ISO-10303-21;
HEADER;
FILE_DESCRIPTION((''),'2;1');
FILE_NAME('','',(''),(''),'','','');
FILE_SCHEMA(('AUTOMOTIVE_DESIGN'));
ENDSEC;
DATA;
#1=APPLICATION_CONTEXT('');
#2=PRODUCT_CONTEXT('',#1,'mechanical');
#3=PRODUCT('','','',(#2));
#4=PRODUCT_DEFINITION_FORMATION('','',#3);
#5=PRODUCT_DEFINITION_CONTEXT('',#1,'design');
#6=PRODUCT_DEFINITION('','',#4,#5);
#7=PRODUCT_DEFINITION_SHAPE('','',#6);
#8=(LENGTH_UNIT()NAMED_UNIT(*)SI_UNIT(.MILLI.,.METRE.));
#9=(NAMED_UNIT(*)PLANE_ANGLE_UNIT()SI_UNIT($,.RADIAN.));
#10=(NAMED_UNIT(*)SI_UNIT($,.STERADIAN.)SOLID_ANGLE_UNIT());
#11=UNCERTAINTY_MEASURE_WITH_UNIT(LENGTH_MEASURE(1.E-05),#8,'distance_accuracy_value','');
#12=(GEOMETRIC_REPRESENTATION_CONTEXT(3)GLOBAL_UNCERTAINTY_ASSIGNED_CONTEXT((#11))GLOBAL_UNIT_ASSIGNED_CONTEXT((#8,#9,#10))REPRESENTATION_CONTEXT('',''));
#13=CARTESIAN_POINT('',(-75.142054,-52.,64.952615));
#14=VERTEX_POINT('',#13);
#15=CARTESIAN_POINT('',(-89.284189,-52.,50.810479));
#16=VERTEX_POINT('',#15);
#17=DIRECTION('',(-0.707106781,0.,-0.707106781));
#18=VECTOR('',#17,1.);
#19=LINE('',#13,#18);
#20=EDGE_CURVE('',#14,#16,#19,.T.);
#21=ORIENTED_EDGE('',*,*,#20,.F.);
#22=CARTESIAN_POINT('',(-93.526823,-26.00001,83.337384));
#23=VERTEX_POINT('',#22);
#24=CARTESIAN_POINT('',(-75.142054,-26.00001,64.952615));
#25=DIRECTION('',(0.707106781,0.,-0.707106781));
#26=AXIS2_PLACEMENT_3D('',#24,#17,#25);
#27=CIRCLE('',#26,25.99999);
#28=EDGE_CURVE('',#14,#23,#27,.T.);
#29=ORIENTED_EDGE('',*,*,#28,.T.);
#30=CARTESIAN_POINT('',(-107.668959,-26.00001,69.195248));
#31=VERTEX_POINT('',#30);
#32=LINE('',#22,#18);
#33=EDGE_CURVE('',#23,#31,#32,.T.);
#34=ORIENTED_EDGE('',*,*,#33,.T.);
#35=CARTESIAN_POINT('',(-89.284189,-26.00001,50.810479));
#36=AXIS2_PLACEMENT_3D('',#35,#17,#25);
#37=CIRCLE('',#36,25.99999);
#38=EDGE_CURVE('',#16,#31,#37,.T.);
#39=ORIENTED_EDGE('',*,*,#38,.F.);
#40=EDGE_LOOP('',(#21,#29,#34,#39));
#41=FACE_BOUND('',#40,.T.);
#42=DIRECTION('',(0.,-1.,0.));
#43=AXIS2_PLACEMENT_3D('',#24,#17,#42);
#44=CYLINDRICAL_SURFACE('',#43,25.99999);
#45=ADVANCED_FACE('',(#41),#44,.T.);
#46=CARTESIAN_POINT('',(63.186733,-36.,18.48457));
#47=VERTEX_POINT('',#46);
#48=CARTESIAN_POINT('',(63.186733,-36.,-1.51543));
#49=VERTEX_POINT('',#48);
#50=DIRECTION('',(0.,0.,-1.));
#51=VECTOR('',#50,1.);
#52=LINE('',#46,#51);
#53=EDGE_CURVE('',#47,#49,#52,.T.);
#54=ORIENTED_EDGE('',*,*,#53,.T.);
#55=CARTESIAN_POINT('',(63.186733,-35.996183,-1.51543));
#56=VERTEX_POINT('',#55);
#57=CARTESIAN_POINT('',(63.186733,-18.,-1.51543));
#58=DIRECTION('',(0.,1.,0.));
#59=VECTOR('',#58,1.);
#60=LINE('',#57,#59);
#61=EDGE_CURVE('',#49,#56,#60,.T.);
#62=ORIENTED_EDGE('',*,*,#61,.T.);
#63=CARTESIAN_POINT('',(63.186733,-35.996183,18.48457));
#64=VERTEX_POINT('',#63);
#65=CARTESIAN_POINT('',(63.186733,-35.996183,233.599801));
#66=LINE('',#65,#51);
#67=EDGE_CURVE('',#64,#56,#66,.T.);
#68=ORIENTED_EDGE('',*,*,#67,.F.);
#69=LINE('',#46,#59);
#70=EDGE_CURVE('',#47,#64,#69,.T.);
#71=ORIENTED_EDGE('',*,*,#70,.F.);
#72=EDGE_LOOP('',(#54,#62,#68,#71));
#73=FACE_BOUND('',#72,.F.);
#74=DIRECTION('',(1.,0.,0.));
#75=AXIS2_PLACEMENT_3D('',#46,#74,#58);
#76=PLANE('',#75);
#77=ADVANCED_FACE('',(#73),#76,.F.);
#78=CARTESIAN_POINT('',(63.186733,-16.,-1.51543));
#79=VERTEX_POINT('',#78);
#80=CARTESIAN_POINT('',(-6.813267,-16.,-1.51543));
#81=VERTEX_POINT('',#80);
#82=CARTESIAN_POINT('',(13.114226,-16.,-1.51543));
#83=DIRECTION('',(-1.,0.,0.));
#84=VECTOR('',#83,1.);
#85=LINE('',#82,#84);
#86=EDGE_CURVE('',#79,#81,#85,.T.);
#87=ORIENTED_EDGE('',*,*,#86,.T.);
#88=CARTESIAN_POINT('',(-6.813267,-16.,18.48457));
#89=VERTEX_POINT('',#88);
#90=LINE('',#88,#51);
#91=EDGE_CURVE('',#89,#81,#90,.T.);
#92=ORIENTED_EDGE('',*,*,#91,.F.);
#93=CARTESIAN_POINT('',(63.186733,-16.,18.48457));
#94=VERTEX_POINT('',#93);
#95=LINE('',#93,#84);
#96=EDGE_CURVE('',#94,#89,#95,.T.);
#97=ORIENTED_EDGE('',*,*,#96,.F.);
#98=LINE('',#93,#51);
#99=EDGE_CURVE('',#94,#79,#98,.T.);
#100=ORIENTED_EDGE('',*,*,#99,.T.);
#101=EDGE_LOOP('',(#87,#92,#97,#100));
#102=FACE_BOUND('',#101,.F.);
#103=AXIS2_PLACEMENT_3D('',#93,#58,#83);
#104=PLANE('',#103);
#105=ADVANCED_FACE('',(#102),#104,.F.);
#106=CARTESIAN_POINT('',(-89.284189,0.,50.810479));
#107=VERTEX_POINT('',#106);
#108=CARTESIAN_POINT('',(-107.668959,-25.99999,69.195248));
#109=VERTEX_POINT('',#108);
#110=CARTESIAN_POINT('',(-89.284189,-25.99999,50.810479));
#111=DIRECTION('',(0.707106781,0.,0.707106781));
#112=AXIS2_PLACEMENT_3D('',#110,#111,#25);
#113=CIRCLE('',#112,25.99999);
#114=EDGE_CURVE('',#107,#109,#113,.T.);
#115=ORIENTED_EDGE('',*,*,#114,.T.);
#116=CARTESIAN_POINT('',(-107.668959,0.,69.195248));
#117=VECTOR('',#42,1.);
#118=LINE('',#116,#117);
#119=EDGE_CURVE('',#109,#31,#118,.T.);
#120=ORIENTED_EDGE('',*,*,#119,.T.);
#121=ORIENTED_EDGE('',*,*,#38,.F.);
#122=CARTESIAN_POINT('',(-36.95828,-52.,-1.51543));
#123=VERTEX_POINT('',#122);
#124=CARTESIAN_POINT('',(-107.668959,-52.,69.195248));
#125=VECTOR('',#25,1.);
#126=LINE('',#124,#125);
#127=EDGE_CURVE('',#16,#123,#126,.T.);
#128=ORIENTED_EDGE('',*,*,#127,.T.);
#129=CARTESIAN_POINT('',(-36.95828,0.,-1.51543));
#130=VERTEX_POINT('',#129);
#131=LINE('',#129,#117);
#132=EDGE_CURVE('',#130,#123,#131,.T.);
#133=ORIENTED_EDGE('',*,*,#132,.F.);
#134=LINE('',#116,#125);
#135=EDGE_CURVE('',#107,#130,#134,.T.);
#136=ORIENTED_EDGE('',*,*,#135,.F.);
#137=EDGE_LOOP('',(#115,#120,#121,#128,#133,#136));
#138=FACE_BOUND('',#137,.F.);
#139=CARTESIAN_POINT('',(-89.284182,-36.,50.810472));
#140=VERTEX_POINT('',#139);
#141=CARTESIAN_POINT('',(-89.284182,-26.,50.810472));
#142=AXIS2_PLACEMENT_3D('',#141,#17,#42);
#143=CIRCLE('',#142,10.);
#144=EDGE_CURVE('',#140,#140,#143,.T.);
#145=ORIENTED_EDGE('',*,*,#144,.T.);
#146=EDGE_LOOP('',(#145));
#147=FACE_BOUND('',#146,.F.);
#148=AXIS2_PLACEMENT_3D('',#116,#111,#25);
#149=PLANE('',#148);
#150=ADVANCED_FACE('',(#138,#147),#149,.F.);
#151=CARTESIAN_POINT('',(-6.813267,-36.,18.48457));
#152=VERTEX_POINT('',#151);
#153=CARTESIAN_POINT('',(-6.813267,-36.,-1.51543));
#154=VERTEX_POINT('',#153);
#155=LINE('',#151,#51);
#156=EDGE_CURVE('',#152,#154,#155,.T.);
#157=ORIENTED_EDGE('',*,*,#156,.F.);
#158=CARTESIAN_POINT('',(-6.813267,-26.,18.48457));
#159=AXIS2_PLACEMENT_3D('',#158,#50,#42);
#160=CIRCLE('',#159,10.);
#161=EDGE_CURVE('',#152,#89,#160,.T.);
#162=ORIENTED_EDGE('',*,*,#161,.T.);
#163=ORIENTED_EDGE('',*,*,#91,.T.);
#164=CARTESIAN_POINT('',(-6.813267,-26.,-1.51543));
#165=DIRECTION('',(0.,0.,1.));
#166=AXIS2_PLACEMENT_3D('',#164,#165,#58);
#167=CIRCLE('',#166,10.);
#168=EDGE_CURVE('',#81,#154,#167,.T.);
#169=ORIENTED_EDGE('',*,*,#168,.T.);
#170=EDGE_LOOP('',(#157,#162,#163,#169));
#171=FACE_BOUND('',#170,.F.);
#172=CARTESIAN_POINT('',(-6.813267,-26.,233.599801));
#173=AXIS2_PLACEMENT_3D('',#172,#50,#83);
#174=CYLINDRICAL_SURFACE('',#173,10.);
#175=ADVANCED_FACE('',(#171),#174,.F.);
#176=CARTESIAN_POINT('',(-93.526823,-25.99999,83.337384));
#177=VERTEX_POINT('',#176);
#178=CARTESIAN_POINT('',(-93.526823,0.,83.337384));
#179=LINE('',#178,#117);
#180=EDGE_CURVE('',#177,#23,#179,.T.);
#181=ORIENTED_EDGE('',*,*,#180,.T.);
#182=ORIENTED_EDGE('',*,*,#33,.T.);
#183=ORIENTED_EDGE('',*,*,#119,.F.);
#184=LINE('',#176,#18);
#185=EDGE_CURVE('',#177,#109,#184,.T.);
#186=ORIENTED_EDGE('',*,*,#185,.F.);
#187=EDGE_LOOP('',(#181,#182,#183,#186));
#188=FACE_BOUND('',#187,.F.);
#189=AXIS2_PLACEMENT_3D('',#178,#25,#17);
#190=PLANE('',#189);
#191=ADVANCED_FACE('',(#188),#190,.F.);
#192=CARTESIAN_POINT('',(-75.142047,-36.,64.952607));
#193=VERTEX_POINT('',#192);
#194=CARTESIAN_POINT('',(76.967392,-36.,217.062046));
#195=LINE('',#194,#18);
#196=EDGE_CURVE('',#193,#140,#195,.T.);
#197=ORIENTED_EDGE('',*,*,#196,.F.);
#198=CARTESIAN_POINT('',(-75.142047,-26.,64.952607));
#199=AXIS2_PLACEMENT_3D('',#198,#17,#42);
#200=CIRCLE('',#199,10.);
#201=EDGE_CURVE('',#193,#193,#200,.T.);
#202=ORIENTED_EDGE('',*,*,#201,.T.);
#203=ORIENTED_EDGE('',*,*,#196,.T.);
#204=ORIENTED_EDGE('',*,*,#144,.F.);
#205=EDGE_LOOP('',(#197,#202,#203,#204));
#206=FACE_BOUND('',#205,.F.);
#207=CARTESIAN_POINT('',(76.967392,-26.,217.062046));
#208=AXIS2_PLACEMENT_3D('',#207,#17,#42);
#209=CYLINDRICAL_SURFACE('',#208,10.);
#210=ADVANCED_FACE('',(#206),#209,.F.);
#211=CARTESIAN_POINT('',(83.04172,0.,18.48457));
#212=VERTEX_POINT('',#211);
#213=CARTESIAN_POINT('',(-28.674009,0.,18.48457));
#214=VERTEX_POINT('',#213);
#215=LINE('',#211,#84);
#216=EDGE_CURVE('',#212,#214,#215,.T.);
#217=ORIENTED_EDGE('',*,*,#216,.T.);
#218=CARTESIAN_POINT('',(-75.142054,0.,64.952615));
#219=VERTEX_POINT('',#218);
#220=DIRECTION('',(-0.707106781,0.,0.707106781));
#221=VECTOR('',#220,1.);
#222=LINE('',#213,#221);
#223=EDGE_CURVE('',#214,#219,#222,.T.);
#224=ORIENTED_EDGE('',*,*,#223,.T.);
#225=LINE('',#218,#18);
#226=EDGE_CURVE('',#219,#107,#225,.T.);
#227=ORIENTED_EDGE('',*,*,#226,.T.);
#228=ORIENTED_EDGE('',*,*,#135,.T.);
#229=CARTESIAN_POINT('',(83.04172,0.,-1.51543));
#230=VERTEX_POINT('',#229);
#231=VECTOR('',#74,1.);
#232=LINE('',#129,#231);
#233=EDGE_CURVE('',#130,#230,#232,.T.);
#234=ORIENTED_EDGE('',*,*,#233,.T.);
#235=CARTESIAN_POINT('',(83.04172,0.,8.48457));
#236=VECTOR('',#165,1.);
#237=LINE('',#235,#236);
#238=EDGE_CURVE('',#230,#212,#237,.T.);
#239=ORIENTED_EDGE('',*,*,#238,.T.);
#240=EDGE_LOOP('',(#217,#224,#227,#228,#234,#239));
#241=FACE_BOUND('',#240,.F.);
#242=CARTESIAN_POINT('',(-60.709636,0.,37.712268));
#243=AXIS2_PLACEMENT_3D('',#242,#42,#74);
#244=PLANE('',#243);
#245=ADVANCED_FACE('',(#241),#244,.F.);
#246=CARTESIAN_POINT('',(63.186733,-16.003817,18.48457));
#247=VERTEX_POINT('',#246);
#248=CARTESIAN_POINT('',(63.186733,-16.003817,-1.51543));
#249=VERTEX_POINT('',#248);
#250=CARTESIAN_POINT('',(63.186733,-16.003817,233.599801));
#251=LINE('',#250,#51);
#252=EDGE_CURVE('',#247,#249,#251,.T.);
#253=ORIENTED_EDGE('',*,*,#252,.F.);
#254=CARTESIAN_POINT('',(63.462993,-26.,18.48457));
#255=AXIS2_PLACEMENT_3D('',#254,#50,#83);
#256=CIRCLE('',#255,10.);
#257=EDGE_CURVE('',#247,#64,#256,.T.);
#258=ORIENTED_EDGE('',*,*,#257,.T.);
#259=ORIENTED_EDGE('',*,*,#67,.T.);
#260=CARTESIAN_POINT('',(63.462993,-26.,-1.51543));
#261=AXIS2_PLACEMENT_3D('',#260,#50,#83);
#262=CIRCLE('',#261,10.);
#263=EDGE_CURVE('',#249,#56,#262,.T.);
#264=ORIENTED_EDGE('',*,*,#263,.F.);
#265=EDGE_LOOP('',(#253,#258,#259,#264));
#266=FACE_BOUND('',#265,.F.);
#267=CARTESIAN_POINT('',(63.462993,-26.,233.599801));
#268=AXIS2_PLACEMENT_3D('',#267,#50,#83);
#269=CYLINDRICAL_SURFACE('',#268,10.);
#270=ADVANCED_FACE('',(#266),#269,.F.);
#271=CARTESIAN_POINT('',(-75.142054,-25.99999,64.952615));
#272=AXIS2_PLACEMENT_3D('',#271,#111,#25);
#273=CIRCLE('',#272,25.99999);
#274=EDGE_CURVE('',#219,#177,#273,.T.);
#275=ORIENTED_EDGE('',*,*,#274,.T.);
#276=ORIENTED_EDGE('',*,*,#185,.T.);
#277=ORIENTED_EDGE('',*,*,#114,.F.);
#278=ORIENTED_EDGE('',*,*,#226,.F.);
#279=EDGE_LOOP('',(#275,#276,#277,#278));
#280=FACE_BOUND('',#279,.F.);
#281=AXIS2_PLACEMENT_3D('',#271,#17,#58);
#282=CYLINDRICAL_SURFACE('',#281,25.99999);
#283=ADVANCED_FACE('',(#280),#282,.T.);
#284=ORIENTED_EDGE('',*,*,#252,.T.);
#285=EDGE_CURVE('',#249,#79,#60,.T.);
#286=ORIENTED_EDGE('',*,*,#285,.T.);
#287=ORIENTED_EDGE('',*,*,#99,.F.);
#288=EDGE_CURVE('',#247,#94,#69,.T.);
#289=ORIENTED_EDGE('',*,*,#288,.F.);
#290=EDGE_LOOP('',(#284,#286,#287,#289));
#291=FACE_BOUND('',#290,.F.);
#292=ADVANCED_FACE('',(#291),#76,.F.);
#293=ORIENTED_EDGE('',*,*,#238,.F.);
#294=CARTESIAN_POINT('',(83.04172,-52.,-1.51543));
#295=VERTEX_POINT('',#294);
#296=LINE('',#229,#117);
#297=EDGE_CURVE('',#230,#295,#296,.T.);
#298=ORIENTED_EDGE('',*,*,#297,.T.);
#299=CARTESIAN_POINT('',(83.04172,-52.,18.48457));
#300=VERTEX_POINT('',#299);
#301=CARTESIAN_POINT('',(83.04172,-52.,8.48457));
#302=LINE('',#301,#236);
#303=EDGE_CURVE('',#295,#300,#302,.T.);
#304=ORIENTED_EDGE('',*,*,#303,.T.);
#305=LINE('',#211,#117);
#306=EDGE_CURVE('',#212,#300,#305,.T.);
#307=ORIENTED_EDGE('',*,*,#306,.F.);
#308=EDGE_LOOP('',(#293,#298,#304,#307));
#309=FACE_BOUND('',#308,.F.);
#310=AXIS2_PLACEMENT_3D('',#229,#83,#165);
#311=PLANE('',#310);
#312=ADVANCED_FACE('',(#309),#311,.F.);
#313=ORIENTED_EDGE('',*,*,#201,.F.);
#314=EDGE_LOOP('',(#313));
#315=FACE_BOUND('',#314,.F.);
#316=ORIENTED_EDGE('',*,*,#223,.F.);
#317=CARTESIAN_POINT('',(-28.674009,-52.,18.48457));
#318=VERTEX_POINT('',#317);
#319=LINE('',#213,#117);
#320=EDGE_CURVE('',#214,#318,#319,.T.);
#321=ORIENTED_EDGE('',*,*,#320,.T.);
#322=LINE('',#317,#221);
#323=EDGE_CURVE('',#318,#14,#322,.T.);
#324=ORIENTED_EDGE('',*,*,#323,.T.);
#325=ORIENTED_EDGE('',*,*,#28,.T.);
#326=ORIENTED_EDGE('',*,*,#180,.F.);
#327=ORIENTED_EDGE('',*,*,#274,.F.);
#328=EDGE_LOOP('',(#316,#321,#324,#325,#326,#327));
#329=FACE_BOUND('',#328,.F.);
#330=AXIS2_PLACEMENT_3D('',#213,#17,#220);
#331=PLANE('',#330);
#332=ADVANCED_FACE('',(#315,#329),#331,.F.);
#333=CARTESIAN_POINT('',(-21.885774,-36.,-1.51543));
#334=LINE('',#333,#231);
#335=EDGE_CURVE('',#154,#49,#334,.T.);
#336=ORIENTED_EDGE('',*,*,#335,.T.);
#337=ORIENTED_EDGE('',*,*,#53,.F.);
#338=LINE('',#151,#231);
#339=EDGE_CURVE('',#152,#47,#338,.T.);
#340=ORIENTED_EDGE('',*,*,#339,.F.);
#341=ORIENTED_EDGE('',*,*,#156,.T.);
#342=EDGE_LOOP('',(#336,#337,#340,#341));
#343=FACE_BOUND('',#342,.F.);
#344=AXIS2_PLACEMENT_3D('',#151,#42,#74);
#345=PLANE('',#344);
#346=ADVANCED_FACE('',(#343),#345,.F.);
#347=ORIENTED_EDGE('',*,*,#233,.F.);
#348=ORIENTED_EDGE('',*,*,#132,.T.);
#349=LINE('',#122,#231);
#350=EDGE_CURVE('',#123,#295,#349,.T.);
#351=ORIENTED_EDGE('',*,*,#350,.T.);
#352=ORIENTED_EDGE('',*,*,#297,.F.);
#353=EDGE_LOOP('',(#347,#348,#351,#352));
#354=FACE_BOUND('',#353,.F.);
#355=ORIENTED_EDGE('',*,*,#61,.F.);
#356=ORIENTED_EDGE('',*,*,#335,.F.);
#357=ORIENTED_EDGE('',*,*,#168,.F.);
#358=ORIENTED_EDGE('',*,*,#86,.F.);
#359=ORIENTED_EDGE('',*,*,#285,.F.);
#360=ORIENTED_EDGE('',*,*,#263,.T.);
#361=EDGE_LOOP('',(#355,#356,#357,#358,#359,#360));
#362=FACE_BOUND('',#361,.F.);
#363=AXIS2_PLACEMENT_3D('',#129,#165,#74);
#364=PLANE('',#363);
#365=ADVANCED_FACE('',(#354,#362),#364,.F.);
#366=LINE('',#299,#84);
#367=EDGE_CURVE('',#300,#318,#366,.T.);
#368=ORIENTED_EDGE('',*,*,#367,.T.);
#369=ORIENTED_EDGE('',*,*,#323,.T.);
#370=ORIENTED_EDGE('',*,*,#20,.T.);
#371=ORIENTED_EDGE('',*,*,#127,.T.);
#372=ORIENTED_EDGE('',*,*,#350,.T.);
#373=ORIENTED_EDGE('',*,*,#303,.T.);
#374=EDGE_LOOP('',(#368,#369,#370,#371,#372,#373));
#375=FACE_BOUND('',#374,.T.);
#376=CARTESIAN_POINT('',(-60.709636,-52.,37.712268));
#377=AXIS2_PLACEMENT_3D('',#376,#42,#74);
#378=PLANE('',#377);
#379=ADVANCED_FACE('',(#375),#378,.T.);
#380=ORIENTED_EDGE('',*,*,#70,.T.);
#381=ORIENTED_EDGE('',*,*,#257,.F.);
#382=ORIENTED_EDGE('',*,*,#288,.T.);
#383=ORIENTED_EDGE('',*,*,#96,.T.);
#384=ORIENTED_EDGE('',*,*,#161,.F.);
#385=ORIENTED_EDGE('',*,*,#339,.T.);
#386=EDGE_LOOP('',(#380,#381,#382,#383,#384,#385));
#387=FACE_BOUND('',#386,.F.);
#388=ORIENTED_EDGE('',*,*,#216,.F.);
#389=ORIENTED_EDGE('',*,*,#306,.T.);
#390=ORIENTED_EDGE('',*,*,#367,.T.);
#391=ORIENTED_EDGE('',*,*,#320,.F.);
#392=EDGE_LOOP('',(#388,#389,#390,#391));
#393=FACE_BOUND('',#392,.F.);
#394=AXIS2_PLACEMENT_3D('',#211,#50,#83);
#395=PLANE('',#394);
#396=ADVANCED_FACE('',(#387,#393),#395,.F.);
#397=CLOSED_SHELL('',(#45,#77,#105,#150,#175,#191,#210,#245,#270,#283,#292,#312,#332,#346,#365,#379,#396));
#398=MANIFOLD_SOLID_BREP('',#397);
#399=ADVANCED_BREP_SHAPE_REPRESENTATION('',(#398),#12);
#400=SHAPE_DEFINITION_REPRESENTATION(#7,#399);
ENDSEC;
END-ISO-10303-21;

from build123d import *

# Parameters (mm, degrees)
F0_W     = 90
F0_H     = 20
F0_W_2   = 10
F1_DEPTH = 52
F3_D     = 20
F5_D     = 20
F6_R     = 25.99999
F7_DEPTH = 312


# Not quite as in the source:
# - a fillet or chamfer is up to 0.001 mm smaller than in the source, because OpenCascade refuses the exact size


with BuildPart() as f1:
    # F0 (on Front) → F1 (new body)
    with BuildSketch(Plane.XZ):
        Polygon((-16.9582804857, -1.5154299321), (-16.9582804857, 18.4845700679), (-28.6740092382, 18.4845700679), (-68.0709788579, 57.8815396876), (-82.2131144816, 72.0236753113), (-93.5268229806, 83.3373838103), (-107.6689586043, 69.1952481866), (-36.9582804857, -1.5154299321), align=None)
        with Locations((28.0417195143, 8.4845700679)):
            Rectangle(F0_W, F0_H)
        with Locations((78.0417195143, 8.4845700679)):
            Rectangle(F0_W_2, F0_H)
    extrude(amount=F1_DEPTH)

    # F3 (through all)
    with Locations(Plane.XY.offset(18.4845700679)):
        with Locations((63.4629929066, -26), (-6.8132670224, -26)):
            Hole(F3_D / 2)

    # F5 (through all)
    with Locations(Plane(origin=(-5.0947195851, 0, -5.0947195851), x_dir=(0, 1, 0), z_dir=(0.7071067812, 0, 0.7071067812))):
        with Locations((-26, 99.061879971)):
            Hole(F5_D / 2)

    # F6 (radius 26 in the source; OpenCascade refuses exactly that, so slightly less here)
    f6_edges = [f1.edges().sort_by_distance(p)[0] for p in [
        (-100.597891, 0, 76.266316),
        (-100.597891, -52, 76.266316),
    ]]
    fillet(f6_edges, radius=F6_R)

    # F2 (on face) → F7 (cut)
    with BuildSketch(Plane.XY.offset(18.4845700679)):
        Polygon((63.1867329776, -36), (63.1867329776, -26), (52.6720061898, -26), (0, -26), (-5.5663499609, -26), (-6.8132670224, -26), (-6.8132670224, -36), align=None)
        Polygon((52.6720061898, -26), (63.1867329776, -26), (63.1867329776, -16), (-6.8132670224, -16), (-6.8132670224, -26), (-5.5663499609, -26), (0, -26), align=None)
    extrude(amount=-F7_DEPTH, mode=Mode.SUBTRACT)


solid = f1.part
